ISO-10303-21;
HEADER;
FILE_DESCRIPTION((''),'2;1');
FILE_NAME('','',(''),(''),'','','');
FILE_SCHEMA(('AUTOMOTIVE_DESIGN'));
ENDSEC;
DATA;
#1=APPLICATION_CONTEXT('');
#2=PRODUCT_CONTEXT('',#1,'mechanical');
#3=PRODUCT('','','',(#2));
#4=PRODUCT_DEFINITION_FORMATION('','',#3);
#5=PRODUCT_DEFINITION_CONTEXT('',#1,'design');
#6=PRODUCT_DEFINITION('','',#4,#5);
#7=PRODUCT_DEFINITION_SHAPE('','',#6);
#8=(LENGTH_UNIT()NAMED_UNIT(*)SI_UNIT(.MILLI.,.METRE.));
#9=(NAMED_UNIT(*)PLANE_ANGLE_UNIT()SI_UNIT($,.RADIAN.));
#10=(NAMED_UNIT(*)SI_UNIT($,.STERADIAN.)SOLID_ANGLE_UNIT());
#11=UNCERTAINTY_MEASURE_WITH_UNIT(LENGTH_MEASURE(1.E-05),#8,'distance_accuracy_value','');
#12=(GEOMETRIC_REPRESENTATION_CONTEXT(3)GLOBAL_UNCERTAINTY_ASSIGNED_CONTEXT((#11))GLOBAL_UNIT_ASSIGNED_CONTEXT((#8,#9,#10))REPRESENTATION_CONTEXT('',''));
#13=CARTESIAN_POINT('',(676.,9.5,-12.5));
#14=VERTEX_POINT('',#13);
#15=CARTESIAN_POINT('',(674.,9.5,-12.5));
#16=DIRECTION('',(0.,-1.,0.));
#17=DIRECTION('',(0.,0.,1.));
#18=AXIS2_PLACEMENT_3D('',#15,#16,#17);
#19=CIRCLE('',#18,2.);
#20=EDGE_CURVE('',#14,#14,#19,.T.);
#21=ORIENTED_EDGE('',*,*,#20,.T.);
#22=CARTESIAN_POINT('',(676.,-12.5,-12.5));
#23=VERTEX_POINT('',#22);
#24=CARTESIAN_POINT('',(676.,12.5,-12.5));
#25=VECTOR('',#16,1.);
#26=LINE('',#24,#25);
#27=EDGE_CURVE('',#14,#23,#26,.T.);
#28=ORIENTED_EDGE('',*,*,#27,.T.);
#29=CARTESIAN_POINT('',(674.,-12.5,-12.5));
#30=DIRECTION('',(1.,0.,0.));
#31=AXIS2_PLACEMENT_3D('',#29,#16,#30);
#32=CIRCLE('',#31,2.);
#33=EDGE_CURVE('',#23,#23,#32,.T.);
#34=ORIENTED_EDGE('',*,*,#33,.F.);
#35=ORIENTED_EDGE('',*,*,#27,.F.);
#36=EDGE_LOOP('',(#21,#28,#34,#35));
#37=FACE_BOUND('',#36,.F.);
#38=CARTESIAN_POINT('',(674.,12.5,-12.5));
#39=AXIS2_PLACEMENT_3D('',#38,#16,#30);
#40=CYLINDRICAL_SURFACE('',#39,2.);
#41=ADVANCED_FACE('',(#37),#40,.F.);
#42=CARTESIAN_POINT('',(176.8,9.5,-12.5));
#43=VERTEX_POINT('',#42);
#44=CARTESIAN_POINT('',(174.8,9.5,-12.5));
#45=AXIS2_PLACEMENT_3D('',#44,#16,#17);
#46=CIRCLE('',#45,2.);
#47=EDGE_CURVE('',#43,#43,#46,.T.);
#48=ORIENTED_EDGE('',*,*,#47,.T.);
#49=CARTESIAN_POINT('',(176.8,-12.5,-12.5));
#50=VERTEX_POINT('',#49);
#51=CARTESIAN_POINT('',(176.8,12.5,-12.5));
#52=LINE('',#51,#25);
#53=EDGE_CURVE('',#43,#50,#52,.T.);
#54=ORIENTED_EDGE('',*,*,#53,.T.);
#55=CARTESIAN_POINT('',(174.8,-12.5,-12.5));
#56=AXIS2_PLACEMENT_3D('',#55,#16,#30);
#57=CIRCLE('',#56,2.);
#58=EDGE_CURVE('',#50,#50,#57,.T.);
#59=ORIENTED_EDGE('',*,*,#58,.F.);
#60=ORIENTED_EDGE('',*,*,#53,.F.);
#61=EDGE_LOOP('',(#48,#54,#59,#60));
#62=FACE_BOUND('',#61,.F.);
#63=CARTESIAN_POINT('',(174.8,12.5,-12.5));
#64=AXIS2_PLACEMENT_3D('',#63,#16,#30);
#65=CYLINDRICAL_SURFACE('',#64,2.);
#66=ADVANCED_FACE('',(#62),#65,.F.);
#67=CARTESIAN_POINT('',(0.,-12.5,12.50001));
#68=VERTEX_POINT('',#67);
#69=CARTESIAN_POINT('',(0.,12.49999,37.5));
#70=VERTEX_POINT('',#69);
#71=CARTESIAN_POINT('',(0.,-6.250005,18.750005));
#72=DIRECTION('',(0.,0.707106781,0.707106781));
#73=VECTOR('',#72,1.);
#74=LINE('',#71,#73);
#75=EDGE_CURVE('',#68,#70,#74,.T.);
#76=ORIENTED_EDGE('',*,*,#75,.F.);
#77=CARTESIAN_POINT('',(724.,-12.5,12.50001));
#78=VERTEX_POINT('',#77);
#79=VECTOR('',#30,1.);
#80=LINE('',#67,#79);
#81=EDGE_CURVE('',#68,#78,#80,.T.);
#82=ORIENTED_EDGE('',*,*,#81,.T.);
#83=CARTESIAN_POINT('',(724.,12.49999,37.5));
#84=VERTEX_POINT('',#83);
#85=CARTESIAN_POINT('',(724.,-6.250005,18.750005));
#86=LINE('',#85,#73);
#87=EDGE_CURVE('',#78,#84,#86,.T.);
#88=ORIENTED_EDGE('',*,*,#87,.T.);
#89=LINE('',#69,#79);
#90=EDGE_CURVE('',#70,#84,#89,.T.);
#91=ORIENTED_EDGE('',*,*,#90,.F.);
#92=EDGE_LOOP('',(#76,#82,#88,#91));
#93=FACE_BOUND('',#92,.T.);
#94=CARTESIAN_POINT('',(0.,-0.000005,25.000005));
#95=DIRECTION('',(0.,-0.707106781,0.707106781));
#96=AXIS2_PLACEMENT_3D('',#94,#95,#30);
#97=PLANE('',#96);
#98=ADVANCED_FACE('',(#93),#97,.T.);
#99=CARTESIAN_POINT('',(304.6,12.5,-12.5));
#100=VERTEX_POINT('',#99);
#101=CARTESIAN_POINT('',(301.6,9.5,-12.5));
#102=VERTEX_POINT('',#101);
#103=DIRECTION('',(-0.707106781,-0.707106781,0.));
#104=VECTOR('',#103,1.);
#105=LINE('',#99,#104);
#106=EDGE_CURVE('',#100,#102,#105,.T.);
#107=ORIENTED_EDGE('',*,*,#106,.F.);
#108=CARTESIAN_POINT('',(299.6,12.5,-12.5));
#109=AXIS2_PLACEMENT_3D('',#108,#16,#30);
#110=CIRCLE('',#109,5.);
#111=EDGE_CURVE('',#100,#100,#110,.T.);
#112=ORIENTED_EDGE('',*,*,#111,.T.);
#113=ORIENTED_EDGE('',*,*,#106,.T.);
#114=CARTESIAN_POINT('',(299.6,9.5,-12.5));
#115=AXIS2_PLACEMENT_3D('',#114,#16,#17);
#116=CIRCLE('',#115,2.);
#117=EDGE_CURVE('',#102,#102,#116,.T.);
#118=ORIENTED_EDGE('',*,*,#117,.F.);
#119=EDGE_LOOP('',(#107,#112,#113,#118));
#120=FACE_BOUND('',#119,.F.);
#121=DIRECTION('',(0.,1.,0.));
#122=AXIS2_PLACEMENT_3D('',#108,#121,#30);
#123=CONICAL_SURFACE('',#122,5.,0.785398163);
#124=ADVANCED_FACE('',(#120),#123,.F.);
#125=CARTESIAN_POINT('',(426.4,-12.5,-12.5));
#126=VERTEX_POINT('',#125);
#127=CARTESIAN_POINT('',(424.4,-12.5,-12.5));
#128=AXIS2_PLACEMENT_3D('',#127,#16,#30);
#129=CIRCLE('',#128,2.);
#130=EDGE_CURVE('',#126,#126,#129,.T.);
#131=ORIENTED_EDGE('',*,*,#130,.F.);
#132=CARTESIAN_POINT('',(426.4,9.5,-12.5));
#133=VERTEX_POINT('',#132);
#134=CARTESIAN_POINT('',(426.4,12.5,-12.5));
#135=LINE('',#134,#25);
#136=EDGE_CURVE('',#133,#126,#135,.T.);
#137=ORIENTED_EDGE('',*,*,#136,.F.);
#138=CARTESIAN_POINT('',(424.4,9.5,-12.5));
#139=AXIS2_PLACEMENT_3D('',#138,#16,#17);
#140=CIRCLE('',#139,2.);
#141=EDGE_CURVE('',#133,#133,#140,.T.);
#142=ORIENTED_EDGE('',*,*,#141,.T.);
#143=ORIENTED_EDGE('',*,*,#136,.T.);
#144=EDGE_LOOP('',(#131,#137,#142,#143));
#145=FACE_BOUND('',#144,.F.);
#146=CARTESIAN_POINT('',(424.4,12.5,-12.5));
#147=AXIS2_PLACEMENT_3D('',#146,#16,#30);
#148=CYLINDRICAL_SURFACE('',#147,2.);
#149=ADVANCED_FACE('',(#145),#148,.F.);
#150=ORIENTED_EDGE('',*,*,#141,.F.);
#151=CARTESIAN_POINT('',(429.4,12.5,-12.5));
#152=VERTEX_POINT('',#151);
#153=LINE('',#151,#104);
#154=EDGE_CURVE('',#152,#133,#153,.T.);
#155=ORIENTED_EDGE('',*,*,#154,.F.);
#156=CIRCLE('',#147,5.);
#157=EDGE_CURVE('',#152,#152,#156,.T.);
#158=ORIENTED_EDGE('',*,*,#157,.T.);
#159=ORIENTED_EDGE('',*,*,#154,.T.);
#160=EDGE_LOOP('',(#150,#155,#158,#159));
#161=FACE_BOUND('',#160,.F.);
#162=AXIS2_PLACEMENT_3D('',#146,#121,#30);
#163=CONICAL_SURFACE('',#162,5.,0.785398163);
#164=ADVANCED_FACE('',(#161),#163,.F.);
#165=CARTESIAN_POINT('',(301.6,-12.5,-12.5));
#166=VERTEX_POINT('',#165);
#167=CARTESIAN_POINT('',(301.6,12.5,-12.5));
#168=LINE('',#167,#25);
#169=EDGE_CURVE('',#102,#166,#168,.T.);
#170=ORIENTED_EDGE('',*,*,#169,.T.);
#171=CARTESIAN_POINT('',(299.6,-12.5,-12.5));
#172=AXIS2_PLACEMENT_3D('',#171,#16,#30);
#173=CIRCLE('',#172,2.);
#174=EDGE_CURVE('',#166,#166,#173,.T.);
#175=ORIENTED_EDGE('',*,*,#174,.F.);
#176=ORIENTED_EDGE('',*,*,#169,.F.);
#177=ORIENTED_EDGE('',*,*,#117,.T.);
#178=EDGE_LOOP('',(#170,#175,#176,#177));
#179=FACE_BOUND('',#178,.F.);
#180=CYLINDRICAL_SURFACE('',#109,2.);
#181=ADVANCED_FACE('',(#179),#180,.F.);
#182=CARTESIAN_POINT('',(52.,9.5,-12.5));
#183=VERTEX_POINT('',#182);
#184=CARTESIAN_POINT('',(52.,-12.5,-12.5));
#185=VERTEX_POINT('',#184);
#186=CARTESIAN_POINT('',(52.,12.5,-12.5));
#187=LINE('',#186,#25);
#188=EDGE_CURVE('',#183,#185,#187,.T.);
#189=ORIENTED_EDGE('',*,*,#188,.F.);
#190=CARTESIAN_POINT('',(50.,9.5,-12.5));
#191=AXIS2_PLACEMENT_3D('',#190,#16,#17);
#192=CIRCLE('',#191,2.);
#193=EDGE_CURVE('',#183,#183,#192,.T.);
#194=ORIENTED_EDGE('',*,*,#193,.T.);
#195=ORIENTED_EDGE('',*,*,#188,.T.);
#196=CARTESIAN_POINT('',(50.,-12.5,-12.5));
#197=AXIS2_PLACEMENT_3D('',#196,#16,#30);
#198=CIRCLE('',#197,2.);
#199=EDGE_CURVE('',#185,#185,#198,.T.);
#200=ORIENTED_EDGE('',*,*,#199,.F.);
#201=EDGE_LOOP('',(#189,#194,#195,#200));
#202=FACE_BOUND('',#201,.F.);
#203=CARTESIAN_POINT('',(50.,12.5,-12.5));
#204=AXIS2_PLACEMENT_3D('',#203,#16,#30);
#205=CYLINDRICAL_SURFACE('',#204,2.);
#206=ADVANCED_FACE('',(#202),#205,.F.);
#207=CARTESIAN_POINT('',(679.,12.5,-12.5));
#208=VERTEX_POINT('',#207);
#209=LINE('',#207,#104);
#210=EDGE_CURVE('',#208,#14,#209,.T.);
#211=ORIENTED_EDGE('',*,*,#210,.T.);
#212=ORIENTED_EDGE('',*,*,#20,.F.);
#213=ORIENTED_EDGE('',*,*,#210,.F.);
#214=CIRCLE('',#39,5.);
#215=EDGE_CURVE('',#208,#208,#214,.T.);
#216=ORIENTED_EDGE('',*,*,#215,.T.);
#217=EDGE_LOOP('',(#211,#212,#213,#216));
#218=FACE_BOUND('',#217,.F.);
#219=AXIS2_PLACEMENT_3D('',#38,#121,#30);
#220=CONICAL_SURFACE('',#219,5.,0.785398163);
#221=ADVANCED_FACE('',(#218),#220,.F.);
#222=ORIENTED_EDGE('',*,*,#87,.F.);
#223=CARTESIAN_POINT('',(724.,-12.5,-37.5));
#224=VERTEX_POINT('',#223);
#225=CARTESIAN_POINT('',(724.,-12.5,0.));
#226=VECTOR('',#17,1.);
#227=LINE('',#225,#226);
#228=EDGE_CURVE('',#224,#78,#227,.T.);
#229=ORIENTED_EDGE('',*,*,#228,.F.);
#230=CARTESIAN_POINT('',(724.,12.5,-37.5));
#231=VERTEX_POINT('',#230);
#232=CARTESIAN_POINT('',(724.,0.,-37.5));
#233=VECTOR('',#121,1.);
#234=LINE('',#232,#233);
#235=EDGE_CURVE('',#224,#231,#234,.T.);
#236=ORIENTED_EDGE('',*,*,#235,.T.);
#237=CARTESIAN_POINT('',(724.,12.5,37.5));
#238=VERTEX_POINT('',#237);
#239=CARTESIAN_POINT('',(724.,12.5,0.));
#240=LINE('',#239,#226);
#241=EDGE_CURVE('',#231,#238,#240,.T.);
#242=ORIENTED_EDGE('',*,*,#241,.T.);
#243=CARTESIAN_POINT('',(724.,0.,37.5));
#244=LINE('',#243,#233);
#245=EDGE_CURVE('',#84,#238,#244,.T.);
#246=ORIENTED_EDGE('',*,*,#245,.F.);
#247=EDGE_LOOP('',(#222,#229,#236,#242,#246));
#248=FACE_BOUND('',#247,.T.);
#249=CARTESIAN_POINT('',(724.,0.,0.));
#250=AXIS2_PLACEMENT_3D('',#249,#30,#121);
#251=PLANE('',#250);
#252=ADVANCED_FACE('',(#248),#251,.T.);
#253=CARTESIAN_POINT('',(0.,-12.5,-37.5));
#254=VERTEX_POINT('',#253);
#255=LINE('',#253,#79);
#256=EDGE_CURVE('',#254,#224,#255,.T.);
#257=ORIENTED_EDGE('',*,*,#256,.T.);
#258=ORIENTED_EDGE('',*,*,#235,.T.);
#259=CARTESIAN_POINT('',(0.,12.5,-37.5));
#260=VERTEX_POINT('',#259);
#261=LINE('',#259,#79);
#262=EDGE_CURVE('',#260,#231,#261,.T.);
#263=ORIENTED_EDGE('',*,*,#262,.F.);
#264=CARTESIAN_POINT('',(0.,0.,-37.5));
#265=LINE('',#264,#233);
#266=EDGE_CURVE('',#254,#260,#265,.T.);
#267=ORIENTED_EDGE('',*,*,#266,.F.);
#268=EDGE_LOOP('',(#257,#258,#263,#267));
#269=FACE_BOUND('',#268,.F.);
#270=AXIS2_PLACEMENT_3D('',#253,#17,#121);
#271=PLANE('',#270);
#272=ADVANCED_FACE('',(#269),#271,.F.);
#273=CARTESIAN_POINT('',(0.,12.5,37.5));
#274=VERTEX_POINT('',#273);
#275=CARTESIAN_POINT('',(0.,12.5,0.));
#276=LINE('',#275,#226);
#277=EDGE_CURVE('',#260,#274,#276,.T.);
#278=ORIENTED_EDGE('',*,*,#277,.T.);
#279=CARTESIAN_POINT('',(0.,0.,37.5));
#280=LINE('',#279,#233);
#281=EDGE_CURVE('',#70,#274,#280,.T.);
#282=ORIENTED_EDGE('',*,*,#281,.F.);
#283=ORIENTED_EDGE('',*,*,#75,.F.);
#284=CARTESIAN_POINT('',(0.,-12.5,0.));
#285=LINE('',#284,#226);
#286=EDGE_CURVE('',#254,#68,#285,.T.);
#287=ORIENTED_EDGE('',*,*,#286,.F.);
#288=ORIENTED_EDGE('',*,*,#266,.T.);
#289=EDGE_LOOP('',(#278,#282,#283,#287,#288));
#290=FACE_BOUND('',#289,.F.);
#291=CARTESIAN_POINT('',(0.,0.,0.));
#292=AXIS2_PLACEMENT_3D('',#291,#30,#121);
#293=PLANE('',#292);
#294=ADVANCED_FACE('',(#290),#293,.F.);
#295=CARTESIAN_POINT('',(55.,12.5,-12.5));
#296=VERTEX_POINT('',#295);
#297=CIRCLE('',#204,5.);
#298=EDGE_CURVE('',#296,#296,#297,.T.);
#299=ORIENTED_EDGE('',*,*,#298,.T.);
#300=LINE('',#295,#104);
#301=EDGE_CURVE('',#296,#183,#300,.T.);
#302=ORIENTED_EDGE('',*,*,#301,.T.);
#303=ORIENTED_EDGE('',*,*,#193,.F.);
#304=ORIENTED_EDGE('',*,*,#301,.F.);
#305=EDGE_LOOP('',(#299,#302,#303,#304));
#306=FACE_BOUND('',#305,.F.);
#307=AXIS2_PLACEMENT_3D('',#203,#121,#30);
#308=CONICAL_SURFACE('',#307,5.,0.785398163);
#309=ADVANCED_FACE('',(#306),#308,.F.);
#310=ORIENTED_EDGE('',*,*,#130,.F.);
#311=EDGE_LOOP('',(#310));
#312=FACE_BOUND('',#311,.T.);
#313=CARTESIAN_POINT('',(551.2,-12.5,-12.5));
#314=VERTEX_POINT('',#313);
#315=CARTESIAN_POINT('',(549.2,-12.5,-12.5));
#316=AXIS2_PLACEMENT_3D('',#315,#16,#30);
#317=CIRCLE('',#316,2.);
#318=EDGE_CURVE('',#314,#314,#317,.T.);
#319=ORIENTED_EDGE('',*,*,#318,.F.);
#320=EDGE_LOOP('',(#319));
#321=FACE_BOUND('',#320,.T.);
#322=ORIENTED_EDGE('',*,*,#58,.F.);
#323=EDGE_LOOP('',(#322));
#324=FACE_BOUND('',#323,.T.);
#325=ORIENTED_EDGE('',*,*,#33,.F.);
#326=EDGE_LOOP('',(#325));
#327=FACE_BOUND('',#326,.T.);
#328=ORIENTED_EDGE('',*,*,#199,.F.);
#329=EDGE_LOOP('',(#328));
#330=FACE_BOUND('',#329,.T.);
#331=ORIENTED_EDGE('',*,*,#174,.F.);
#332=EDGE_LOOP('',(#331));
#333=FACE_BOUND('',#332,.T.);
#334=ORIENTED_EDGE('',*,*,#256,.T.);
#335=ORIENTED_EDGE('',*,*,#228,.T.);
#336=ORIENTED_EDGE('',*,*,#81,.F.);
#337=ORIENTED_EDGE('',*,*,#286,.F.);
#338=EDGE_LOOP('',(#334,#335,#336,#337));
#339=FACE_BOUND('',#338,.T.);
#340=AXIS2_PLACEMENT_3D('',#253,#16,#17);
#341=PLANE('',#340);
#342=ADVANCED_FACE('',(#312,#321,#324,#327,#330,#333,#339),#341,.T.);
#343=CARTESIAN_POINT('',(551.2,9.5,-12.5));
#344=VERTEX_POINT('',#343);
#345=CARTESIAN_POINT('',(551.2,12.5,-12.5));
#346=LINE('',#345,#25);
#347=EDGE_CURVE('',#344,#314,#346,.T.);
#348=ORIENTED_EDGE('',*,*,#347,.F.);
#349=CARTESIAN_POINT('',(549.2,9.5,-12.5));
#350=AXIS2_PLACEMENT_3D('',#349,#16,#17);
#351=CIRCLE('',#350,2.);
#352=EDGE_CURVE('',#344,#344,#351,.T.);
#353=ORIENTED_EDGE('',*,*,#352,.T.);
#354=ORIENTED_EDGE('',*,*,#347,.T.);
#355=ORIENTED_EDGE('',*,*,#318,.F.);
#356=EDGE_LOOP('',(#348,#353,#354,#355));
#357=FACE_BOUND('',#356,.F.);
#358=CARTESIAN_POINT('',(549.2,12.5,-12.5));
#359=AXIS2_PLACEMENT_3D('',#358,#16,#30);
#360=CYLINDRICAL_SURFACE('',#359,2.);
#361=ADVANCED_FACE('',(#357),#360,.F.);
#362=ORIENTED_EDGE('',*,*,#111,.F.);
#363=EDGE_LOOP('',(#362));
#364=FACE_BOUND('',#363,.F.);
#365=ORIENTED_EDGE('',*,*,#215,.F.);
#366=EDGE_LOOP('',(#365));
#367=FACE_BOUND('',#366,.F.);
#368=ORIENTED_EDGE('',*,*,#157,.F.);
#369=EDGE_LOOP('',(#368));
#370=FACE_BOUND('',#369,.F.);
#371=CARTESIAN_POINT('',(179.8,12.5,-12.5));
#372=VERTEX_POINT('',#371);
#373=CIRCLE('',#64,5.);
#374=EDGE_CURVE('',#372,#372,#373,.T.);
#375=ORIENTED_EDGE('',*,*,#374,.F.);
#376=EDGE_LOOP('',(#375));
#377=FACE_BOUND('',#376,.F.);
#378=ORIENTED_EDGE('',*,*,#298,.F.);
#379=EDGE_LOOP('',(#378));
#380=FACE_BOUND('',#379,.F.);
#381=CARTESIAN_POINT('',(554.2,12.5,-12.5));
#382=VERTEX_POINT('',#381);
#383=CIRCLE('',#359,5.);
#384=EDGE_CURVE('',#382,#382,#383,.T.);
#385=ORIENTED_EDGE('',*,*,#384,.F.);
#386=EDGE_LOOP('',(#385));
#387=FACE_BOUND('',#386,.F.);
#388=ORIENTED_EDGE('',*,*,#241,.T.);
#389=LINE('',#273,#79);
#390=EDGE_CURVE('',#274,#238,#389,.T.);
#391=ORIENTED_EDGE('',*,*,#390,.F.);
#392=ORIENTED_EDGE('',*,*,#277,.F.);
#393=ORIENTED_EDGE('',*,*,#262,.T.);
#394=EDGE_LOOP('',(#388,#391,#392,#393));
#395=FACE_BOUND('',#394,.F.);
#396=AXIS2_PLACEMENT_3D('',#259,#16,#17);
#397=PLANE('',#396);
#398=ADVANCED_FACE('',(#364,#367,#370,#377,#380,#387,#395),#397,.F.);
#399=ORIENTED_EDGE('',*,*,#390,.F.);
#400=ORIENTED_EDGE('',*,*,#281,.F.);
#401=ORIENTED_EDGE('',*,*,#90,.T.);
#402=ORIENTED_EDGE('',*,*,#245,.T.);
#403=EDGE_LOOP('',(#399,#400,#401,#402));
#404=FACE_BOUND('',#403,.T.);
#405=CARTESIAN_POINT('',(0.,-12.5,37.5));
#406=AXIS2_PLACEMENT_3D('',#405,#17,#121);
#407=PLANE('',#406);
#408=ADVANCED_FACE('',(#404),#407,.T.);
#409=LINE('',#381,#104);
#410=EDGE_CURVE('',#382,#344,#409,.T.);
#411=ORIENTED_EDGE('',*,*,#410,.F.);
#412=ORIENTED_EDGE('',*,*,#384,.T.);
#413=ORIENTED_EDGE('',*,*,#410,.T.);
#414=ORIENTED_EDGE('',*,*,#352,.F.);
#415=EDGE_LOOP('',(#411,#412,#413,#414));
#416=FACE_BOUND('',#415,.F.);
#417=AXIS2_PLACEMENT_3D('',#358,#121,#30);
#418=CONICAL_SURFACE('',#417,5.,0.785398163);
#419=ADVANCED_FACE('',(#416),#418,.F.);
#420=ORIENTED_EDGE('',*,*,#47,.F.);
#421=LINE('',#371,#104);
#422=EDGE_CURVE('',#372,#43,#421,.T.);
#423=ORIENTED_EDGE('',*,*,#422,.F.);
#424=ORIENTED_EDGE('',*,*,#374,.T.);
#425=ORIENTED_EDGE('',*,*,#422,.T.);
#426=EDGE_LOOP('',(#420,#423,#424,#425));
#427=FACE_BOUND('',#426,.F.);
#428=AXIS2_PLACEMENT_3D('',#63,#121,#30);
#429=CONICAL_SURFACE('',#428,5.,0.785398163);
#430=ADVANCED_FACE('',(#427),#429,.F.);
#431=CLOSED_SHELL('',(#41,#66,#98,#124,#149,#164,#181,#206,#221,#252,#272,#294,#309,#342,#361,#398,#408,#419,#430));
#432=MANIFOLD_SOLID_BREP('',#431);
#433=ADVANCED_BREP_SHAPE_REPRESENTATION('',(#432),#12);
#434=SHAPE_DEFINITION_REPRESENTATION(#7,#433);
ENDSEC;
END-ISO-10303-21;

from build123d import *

# Parameters (mm, degrees)
F4_W           = 25
F4_H           = 75
F0_DEPTH       = 724
F1_SIZE        = 24.99999
F3_D           = 4
F3_CSINK_D     = 10
F3_CSINK_ANGLE = 90


# Not quite as in the source:
# - a fillet or chamfer is up to 0.001 mm smaller than in the source, because OpenCascade refuses the exact size
# - a feature names something its author has since deleted; it is built from what else it names


with BuildPart() as f0:
    # F4 (on Right) → F0 (new body)
    with BuildSketch(Plane.YZ):
        Rectangle(F4_W, F4_H)
    extrude(amount=F0_DEPTH)

    # F1 (size 25 in the source; OpenCascade refuses exactly that, so slightly less here)
    f1_edges = [f0.edges().sort_by_distance(p)[0] for p in [
        (362, -12.5, 37.5),
    ]]
    chamfer(f1_edges, length=F1_SIZE)

    # F3 (through all)
    with Locations(Plane(origin=(0, 12.5, 0), x_dir=(-1, 0, 0), z_dir=(0, 1, 0))):
        with Locations((-50, -12.5), (-174.8, -12.5), (-299.6, -12.5), (-424.4, -12.5), (-549.2, -12.5), (-674, -12.5)):
            CounterSinkHole(F3_D / 2, F3_CSINK_D / 2, counter_sink_angle=F3_CSINK_ANGLE)


solid = f0.part
